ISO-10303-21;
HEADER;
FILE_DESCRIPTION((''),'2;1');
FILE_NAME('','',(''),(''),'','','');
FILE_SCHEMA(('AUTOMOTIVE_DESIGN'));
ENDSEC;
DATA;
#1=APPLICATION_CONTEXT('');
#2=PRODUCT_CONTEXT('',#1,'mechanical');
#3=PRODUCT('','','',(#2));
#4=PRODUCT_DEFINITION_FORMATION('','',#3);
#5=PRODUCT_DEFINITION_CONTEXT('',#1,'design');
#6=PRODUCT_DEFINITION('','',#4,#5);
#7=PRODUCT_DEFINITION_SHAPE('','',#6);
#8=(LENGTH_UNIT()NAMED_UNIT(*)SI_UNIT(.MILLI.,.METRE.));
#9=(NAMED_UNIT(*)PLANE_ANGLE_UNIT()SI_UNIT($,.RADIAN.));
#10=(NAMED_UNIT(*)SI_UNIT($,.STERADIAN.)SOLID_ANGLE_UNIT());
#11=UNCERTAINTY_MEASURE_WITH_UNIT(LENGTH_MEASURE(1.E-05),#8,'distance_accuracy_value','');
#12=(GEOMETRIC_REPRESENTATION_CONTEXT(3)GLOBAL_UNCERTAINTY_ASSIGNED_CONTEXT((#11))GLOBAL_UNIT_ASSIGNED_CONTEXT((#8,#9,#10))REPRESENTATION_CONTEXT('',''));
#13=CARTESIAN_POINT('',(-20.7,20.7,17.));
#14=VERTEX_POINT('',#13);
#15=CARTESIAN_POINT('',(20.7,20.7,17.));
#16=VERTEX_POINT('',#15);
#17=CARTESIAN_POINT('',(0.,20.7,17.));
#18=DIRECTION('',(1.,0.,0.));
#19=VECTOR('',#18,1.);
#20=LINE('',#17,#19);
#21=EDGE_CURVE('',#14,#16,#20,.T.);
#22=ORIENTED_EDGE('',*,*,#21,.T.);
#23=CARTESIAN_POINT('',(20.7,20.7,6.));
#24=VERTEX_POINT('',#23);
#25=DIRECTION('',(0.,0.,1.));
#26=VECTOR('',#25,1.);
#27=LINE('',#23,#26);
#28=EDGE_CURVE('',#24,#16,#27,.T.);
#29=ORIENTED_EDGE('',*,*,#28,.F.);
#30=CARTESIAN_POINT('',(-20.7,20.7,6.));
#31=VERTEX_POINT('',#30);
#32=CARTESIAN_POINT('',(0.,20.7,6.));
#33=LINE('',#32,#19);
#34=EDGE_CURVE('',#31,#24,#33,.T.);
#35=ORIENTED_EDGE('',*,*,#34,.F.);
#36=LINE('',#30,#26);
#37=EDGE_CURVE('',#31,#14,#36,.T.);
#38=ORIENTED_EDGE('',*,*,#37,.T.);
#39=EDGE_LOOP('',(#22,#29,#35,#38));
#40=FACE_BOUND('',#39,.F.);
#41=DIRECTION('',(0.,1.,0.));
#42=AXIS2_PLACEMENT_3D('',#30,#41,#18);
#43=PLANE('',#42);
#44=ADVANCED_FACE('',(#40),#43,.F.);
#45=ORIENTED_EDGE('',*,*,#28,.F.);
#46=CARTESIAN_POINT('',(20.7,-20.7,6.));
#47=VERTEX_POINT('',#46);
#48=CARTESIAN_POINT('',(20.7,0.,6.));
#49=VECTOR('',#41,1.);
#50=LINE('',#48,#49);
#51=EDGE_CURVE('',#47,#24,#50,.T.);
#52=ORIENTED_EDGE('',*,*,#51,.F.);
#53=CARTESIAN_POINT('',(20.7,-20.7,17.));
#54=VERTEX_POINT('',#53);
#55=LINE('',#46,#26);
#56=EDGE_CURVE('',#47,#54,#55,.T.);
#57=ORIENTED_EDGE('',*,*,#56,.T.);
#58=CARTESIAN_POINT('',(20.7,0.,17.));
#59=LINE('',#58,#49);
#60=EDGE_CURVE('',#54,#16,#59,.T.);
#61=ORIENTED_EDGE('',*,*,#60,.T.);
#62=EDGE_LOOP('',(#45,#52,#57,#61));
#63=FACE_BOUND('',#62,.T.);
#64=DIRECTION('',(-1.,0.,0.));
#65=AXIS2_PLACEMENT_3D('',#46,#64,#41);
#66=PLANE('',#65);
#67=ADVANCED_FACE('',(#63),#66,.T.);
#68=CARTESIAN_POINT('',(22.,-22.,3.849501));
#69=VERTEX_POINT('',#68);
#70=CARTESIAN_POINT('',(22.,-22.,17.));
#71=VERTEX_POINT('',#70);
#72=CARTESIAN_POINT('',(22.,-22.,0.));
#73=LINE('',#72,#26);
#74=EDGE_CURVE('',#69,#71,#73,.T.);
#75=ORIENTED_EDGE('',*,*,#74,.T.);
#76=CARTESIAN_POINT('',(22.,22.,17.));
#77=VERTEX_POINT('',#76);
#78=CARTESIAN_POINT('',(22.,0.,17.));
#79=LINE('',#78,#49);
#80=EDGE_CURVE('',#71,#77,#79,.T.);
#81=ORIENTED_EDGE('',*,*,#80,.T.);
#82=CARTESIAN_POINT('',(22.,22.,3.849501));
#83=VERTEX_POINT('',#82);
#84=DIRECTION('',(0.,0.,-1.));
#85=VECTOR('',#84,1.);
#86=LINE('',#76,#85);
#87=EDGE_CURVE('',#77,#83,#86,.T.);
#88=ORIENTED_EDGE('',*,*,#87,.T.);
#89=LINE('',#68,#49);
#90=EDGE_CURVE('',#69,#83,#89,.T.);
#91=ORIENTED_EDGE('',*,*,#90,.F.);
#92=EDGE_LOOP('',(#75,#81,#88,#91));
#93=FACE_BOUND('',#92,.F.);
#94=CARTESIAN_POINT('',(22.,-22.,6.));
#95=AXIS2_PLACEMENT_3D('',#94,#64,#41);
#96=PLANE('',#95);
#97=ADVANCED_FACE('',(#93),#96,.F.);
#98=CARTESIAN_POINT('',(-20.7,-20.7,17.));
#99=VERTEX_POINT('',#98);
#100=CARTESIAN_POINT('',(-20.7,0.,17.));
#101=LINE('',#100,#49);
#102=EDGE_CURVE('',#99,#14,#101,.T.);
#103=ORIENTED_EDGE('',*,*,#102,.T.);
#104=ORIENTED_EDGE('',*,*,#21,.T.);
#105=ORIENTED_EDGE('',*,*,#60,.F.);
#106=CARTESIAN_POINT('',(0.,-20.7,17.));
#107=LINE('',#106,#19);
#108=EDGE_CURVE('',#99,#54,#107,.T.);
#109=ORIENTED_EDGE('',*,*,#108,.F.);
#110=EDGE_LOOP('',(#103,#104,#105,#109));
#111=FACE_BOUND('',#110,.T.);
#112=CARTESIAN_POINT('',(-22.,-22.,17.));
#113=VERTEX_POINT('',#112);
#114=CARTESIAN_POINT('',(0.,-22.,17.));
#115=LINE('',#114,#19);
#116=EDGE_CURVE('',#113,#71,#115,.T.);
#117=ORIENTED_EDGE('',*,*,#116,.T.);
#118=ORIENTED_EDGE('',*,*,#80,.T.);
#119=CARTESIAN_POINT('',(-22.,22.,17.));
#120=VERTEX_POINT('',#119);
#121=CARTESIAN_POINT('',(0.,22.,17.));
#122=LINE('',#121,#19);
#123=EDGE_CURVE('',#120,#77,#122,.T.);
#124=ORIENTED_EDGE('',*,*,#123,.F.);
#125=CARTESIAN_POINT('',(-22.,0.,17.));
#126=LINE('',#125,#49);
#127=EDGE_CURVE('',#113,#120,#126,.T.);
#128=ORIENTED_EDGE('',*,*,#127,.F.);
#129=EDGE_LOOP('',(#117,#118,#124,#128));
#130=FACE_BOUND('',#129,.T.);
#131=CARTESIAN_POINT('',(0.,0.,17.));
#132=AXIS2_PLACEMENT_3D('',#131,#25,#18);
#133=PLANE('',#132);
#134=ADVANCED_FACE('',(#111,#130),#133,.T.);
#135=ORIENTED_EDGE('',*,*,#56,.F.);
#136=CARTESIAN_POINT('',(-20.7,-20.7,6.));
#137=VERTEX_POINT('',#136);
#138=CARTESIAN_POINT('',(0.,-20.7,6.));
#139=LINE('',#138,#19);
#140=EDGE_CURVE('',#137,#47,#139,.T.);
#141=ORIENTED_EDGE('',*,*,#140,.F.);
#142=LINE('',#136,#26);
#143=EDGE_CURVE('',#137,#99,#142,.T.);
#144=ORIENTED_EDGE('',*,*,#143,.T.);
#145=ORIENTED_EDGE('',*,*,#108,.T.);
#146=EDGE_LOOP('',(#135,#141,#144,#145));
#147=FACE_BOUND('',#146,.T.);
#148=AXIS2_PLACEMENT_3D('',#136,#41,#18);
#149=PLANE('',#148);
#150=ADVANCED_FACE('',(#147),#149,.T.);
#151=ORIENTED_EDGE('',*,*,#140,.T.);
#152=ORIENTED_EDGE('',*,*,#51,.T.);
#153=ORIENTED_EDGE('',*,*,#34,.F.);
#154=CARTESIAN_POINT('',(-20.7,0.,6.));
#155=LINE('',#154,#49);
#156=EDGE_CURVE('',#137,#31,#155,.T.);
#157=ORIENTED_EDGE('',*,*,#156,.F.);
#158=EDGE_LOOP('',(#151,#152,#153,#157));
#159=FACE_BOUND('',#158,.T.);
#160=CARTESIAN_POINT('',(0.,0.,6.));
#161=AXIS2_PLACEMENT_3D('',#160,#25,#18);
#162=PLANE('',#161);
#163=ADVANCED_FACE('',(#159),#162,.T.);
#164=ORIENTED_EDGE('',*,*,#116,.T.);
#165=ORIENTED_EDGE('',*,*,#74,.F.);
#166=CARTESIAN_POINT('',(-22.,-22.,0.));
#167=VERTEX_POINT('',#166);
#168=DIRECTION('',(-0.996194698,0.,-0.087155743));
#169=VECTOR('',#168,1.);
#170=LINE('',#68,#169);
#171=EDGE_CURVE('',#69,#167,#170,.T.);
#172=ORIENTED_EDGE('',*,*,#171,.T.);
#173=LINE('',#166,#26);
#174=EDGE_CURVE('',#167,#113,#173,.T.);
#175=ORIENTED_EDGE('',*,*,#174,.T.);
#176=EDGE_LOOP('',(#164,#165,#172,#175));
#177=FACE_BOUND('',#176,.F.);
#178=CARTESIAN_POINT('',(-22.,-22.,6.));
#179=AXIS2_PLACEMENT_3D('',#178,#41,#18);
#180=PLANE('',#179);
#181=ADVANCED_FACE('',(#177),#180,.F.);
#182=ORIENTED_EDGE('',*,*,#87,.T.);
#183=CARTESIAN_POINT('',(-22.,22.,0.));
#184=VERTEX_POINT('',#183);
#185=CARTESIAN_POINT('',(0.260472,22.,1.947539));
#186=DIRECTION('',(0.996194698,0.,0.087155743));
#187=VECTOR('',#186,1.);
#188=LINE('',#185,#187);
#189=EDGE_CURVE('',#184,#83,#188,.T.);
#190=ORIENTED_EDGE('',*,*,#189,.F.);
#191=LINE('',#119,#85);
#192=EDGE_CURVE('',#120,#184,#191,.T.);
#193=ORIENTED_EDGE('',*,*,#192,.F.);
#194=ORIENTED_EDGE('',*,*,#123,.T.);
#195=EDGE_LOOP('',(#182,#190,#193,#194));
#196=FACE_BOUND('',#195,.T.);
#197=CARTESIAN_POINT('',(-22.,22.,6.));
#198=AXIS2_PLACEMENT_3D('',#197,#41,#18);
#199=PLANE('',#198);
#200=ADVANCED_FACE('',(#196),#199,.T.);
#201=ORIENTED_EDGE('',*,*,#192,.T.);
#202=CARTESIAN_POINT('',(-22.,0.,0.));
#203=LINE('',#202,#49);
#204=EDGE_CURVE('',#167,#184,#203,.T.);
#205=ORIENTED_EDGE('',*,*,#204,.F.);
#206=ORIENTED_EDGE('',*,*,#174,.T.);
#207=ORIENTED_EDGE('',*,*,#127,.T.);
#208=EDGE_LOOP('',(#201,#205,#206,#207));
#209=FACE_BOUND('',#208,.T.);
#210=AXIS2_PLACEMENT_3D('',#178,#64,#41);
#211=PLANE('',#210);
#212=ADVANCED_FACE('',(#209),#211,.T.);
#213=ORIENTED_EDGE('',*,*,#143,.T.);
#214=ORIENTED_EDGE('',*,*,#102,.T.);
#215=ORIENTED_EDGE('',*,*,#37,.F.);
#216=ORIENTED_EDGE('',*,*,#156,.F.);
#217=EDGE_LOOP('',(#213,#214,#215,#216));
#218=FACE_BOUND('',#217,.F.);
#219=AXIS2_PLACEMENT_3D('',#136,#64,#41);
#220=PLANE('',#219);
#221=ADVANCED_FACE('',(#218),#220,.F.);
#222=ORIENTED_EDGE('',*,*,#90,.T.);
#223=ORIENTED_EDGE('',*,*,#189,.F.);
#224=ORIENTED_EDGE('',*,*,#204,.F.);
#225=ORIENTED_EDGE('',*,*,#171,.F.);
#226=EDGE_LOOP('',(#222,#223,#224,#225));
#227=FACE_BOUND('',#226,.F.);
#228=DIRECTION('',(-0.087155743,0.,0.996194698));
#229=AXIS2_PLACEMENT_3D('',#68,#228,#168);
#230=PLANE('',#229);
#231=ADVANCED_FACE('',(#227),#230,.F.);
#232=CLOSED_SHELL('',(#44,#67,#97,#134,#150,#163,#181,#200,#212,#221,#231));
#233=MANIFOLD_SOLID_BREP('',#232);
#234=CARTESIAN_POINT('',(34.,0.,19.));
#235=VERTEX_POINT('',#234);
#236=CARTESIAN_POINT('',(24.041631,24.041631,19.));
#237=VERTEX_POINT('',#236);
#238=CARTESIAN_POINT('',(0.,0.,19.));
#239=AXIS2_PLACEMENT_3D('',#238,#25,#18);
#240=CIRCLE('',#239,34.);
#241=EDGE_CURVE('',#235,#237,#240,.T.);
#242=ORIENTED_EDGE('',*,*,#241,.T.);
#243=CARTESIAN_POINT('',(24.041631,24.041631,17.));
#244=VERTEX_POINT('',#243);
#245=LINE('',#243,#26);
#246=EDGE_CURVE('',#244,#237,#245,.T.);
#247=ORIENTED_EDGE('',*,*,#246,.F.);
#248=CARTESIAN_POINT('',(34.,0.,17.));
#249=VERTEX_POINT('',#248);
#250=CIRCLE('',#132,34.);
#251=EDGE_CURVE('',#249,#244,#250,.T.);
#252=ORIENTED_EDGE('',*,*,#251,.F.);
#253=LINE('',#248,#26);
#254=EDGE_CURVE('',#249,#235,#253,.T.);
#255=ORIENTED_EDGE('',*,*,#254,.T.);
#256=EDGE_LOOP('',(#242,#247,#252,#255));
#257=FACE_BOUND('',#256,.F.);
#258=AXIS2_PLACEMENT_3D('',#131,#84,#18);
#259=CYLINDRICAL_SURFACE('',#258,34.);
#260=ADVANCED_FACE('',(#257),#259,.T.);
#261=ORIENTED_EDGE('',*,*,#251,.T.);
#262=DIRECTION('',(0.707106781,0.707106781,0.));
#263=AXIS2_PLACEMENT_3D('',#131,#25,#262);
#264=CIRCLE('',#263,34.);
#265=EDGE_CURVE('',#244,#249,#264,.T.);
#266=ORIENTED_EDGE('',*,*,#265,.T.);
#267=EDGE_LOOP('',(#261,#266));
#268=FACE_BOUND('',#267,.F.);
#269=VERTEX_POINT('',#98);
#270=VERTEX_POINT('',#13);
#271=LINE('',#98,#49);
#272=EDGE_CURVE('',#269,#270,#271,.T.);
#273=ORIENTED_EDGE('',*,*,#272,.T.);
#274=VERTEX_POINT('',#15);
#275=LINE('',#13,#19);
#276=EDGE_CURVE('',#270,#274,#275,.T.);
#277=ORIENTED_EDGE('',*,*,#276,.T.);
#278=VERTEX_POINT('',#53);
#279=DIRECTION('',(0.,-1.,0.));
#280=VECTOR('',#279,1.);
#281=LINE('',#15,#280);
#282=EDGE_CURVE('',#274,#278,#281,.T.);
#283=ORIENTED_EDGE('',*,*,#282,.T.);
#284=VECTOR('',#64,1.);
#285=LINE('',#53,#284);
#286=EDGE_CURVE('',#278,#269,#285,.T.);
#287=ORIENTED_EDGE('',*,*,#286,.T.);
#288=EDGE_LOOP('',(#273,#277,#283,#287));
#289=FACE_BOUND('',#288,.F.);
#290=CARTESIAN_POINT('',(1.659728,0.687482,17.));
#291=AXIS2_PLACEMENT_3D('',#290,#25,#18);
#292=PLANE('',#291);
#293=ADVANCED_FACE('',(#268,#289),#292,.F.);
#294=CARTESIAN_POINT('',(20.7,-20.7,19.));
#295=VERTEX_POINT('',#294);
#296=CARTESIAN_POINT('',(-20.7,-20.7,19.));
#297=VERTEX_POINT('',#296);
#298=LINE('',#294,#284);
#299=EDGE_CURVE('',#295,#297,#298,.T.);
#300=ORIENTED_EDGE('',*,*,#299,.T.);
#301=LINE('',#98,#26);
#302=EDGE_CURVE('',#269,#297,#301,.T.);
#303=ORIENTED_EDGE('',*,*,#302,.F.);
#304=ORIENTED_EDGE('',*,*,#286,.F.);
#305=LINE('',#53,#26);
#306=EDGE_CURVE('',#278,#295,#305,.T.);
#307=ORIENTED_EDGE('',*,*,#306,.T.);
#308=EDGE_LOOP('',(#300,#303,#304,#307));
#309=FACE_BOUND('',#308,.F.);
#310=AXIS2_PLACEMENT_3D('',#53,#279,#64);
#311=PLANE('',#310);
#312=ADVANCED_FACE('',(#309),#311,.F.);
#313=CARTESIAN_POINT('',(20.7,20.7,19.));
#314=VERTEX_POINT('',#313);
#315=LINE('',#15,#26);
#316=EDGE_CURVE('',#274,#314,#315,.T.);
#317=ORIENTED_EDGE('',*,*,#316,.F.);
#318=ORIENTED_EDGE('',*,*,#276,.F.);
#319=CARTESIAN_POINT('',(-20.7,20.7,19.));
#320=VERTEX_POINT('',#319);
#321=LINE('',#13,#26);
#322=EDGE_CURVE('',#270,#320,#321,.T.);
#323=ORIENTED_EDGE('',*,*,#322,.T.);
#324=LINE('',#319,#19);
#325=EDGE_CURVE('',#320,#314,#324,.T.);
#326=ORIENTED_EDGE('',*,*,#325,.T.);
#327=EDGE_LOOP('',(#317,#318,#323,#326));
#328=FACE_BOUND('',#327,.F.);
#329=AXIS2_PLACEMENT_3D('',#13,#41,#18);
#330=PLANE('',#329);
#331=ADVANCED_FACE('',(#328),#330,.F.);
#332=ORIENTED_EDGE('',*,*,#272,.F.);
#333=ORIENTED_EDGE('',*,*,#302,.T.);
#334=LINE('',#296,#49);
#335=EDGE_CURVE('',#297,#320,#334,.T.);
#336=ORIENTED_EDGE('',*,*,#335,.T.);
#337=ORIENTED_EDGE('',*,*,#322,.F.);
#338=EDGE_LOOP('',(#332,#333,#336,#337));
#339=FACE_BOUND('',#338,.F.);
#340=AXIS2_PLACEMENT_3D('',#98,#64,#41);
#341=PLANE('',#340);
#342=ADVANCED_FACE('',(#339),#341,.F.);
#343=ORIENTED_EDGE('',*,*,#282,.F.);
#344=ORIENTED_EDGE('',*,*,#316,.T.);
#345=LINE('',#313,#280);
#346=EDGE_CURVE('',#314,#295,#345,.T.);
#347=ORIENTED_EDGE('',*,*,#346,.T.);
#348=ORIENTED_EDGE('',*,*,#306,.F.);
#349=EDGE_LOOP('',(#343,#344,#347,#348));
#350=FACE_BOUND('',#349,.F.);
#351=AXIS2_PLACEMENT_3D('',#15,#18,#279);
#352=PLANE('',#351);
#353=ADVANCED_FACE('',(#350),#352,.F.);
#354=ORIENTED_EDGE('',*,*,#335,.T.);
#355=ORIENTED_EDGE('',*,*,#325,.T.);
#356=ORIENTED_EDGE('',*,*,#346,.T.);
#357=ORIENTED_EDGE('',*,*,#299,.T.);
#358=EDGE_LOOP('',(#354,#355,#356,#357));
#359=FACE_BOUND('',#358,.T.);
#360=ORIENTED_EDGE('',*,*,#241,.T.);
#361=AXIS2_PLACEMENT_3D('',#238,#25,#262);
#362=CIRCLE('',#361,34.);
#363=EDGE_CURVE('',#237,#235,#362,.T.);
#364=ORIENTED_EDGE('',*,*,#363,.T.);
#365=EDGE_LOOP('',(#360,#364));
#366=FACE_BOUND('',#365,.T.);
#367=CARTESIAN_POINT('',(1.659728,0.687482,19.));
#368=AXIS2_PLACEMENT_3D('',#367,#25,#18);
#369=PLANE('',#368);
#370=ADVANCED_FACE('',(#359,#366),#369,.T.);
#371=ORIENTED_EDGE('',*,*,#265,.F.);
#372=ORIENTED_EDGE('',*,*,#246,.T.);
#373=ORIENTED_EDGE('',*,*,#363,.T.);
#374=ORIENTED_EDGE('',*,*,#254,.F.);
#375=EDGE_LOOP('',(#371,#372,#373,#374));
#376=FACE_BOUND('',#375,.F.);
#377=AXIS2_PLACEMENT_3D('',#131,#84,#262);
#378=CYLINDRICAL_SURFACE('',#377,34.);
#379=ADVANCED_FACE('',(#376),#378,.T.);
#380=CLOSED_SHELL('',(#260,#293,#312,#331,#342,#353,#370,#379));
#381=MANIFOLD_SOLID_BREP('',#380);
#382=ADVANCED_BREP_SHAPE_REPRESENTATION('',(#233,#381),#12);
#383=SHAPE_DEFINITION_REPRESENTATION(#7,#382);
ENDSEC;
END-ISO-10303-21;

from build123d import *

# Parameters (mm, degrees)
F0_W     = 44
F0_H     = 44
F0_R     = 1.5
F1_DEPTH = 6
F2_W     = 44
F2_H     = 44
F2_W_2   = 41.4
F2_H_2   = 41.4
F3_DEPTH = 11
F4_W     = 44
F4_H     = 44
F5_DEPTH = 2
F7_DEPTH = 56.001


# Not quite as in the source:
# - the program builds the solid bodies; features that only make, move or delete a surface that nothing else refers to are left out


with BuildPart() as f1:
    # F0 (on Top) → F1 (new body)
    with BuildSketch(Plane.XY):
        Rectangle(F0_W, F0_H)
        with Locations((0, -17.25)):
            Circle(F0_R, mode=Mode.SUBTRACT)
        with Locations((-17.25, 0)):
            Circle(F0_R, mode=Mode.SUBTRACT)
        with Locations((17.25, 0)):
            Circle(F0_R, mode=Mode.SUBTRACT)
        with Locations((0, 17.25)):
            Circle(F0_R, mode=Mode.SUBTRACT)
        with Locations((0, -17.25)):
            Circle(F0_R)
        with Locations((-17.25, 0)):
            Circle(F0_R)
        with Locations((17.25, 0)):
            Circle(F0_R)
        with Locations((0, 17.25)):
            Circle(F0_R)
    extrude(amount=F1_DEPTH)

    # F2 (on face) → F3 (join)
    with BuildSketch(Plane.XY.offset(6)):
        Rectangle(F2_W, F2_H)
        Rectangle(F2_W_2, F2_H_2, mode=Mode.SUBTRACT)
    extrude(amount=F3_DEPTH)

    # F6 (on face) → F7 (cut, through all)
    with BuildSketch(Plane.XZ.offset(22)):
        Polygon((-22, 0), (22, 0), (22, 3.8495011951), align=None)
    extrude(amount=-F7_DEPTH, mode=Mode.SUBTRACT)


with BuildPart() as f5:
    # F4 (on face) → F5 (new body)
    with BuildSketch(Plane.XY.offset(17)):
        with BuildLine():
            ThreePointArc((34, 0), (31.4119041054, 13.0112367004), (24.0416305603, 24.0416305603))
            ThreePointArc((24.0416305603, 24.0416305603), (-31.4119041054, -13.0112367004), (34, 0))
        make_face()
        Rectangle(F4_W, F4_H, mode=Mode.SUBTRACT)
        Polygon((22, 22), (-22, 22), (-20.7, 20.7), (20.7, 20.7), align=None)
        Polygon((22, -22), (22, 22), (20.7, 20.7), (20.7, -20.7), align=None)
        Polygon((-20.7, 20.7), (-22, 22), (-22, -22), (-20.7, -20.7), align=None)
        Polygon((-20.7, -20.7), (-22, -22), (22, -22), (20.7, -20.7), align=None)
    extrude(amount=F5_DEPTH)


solid = Compound([f1.part, f5.part])
